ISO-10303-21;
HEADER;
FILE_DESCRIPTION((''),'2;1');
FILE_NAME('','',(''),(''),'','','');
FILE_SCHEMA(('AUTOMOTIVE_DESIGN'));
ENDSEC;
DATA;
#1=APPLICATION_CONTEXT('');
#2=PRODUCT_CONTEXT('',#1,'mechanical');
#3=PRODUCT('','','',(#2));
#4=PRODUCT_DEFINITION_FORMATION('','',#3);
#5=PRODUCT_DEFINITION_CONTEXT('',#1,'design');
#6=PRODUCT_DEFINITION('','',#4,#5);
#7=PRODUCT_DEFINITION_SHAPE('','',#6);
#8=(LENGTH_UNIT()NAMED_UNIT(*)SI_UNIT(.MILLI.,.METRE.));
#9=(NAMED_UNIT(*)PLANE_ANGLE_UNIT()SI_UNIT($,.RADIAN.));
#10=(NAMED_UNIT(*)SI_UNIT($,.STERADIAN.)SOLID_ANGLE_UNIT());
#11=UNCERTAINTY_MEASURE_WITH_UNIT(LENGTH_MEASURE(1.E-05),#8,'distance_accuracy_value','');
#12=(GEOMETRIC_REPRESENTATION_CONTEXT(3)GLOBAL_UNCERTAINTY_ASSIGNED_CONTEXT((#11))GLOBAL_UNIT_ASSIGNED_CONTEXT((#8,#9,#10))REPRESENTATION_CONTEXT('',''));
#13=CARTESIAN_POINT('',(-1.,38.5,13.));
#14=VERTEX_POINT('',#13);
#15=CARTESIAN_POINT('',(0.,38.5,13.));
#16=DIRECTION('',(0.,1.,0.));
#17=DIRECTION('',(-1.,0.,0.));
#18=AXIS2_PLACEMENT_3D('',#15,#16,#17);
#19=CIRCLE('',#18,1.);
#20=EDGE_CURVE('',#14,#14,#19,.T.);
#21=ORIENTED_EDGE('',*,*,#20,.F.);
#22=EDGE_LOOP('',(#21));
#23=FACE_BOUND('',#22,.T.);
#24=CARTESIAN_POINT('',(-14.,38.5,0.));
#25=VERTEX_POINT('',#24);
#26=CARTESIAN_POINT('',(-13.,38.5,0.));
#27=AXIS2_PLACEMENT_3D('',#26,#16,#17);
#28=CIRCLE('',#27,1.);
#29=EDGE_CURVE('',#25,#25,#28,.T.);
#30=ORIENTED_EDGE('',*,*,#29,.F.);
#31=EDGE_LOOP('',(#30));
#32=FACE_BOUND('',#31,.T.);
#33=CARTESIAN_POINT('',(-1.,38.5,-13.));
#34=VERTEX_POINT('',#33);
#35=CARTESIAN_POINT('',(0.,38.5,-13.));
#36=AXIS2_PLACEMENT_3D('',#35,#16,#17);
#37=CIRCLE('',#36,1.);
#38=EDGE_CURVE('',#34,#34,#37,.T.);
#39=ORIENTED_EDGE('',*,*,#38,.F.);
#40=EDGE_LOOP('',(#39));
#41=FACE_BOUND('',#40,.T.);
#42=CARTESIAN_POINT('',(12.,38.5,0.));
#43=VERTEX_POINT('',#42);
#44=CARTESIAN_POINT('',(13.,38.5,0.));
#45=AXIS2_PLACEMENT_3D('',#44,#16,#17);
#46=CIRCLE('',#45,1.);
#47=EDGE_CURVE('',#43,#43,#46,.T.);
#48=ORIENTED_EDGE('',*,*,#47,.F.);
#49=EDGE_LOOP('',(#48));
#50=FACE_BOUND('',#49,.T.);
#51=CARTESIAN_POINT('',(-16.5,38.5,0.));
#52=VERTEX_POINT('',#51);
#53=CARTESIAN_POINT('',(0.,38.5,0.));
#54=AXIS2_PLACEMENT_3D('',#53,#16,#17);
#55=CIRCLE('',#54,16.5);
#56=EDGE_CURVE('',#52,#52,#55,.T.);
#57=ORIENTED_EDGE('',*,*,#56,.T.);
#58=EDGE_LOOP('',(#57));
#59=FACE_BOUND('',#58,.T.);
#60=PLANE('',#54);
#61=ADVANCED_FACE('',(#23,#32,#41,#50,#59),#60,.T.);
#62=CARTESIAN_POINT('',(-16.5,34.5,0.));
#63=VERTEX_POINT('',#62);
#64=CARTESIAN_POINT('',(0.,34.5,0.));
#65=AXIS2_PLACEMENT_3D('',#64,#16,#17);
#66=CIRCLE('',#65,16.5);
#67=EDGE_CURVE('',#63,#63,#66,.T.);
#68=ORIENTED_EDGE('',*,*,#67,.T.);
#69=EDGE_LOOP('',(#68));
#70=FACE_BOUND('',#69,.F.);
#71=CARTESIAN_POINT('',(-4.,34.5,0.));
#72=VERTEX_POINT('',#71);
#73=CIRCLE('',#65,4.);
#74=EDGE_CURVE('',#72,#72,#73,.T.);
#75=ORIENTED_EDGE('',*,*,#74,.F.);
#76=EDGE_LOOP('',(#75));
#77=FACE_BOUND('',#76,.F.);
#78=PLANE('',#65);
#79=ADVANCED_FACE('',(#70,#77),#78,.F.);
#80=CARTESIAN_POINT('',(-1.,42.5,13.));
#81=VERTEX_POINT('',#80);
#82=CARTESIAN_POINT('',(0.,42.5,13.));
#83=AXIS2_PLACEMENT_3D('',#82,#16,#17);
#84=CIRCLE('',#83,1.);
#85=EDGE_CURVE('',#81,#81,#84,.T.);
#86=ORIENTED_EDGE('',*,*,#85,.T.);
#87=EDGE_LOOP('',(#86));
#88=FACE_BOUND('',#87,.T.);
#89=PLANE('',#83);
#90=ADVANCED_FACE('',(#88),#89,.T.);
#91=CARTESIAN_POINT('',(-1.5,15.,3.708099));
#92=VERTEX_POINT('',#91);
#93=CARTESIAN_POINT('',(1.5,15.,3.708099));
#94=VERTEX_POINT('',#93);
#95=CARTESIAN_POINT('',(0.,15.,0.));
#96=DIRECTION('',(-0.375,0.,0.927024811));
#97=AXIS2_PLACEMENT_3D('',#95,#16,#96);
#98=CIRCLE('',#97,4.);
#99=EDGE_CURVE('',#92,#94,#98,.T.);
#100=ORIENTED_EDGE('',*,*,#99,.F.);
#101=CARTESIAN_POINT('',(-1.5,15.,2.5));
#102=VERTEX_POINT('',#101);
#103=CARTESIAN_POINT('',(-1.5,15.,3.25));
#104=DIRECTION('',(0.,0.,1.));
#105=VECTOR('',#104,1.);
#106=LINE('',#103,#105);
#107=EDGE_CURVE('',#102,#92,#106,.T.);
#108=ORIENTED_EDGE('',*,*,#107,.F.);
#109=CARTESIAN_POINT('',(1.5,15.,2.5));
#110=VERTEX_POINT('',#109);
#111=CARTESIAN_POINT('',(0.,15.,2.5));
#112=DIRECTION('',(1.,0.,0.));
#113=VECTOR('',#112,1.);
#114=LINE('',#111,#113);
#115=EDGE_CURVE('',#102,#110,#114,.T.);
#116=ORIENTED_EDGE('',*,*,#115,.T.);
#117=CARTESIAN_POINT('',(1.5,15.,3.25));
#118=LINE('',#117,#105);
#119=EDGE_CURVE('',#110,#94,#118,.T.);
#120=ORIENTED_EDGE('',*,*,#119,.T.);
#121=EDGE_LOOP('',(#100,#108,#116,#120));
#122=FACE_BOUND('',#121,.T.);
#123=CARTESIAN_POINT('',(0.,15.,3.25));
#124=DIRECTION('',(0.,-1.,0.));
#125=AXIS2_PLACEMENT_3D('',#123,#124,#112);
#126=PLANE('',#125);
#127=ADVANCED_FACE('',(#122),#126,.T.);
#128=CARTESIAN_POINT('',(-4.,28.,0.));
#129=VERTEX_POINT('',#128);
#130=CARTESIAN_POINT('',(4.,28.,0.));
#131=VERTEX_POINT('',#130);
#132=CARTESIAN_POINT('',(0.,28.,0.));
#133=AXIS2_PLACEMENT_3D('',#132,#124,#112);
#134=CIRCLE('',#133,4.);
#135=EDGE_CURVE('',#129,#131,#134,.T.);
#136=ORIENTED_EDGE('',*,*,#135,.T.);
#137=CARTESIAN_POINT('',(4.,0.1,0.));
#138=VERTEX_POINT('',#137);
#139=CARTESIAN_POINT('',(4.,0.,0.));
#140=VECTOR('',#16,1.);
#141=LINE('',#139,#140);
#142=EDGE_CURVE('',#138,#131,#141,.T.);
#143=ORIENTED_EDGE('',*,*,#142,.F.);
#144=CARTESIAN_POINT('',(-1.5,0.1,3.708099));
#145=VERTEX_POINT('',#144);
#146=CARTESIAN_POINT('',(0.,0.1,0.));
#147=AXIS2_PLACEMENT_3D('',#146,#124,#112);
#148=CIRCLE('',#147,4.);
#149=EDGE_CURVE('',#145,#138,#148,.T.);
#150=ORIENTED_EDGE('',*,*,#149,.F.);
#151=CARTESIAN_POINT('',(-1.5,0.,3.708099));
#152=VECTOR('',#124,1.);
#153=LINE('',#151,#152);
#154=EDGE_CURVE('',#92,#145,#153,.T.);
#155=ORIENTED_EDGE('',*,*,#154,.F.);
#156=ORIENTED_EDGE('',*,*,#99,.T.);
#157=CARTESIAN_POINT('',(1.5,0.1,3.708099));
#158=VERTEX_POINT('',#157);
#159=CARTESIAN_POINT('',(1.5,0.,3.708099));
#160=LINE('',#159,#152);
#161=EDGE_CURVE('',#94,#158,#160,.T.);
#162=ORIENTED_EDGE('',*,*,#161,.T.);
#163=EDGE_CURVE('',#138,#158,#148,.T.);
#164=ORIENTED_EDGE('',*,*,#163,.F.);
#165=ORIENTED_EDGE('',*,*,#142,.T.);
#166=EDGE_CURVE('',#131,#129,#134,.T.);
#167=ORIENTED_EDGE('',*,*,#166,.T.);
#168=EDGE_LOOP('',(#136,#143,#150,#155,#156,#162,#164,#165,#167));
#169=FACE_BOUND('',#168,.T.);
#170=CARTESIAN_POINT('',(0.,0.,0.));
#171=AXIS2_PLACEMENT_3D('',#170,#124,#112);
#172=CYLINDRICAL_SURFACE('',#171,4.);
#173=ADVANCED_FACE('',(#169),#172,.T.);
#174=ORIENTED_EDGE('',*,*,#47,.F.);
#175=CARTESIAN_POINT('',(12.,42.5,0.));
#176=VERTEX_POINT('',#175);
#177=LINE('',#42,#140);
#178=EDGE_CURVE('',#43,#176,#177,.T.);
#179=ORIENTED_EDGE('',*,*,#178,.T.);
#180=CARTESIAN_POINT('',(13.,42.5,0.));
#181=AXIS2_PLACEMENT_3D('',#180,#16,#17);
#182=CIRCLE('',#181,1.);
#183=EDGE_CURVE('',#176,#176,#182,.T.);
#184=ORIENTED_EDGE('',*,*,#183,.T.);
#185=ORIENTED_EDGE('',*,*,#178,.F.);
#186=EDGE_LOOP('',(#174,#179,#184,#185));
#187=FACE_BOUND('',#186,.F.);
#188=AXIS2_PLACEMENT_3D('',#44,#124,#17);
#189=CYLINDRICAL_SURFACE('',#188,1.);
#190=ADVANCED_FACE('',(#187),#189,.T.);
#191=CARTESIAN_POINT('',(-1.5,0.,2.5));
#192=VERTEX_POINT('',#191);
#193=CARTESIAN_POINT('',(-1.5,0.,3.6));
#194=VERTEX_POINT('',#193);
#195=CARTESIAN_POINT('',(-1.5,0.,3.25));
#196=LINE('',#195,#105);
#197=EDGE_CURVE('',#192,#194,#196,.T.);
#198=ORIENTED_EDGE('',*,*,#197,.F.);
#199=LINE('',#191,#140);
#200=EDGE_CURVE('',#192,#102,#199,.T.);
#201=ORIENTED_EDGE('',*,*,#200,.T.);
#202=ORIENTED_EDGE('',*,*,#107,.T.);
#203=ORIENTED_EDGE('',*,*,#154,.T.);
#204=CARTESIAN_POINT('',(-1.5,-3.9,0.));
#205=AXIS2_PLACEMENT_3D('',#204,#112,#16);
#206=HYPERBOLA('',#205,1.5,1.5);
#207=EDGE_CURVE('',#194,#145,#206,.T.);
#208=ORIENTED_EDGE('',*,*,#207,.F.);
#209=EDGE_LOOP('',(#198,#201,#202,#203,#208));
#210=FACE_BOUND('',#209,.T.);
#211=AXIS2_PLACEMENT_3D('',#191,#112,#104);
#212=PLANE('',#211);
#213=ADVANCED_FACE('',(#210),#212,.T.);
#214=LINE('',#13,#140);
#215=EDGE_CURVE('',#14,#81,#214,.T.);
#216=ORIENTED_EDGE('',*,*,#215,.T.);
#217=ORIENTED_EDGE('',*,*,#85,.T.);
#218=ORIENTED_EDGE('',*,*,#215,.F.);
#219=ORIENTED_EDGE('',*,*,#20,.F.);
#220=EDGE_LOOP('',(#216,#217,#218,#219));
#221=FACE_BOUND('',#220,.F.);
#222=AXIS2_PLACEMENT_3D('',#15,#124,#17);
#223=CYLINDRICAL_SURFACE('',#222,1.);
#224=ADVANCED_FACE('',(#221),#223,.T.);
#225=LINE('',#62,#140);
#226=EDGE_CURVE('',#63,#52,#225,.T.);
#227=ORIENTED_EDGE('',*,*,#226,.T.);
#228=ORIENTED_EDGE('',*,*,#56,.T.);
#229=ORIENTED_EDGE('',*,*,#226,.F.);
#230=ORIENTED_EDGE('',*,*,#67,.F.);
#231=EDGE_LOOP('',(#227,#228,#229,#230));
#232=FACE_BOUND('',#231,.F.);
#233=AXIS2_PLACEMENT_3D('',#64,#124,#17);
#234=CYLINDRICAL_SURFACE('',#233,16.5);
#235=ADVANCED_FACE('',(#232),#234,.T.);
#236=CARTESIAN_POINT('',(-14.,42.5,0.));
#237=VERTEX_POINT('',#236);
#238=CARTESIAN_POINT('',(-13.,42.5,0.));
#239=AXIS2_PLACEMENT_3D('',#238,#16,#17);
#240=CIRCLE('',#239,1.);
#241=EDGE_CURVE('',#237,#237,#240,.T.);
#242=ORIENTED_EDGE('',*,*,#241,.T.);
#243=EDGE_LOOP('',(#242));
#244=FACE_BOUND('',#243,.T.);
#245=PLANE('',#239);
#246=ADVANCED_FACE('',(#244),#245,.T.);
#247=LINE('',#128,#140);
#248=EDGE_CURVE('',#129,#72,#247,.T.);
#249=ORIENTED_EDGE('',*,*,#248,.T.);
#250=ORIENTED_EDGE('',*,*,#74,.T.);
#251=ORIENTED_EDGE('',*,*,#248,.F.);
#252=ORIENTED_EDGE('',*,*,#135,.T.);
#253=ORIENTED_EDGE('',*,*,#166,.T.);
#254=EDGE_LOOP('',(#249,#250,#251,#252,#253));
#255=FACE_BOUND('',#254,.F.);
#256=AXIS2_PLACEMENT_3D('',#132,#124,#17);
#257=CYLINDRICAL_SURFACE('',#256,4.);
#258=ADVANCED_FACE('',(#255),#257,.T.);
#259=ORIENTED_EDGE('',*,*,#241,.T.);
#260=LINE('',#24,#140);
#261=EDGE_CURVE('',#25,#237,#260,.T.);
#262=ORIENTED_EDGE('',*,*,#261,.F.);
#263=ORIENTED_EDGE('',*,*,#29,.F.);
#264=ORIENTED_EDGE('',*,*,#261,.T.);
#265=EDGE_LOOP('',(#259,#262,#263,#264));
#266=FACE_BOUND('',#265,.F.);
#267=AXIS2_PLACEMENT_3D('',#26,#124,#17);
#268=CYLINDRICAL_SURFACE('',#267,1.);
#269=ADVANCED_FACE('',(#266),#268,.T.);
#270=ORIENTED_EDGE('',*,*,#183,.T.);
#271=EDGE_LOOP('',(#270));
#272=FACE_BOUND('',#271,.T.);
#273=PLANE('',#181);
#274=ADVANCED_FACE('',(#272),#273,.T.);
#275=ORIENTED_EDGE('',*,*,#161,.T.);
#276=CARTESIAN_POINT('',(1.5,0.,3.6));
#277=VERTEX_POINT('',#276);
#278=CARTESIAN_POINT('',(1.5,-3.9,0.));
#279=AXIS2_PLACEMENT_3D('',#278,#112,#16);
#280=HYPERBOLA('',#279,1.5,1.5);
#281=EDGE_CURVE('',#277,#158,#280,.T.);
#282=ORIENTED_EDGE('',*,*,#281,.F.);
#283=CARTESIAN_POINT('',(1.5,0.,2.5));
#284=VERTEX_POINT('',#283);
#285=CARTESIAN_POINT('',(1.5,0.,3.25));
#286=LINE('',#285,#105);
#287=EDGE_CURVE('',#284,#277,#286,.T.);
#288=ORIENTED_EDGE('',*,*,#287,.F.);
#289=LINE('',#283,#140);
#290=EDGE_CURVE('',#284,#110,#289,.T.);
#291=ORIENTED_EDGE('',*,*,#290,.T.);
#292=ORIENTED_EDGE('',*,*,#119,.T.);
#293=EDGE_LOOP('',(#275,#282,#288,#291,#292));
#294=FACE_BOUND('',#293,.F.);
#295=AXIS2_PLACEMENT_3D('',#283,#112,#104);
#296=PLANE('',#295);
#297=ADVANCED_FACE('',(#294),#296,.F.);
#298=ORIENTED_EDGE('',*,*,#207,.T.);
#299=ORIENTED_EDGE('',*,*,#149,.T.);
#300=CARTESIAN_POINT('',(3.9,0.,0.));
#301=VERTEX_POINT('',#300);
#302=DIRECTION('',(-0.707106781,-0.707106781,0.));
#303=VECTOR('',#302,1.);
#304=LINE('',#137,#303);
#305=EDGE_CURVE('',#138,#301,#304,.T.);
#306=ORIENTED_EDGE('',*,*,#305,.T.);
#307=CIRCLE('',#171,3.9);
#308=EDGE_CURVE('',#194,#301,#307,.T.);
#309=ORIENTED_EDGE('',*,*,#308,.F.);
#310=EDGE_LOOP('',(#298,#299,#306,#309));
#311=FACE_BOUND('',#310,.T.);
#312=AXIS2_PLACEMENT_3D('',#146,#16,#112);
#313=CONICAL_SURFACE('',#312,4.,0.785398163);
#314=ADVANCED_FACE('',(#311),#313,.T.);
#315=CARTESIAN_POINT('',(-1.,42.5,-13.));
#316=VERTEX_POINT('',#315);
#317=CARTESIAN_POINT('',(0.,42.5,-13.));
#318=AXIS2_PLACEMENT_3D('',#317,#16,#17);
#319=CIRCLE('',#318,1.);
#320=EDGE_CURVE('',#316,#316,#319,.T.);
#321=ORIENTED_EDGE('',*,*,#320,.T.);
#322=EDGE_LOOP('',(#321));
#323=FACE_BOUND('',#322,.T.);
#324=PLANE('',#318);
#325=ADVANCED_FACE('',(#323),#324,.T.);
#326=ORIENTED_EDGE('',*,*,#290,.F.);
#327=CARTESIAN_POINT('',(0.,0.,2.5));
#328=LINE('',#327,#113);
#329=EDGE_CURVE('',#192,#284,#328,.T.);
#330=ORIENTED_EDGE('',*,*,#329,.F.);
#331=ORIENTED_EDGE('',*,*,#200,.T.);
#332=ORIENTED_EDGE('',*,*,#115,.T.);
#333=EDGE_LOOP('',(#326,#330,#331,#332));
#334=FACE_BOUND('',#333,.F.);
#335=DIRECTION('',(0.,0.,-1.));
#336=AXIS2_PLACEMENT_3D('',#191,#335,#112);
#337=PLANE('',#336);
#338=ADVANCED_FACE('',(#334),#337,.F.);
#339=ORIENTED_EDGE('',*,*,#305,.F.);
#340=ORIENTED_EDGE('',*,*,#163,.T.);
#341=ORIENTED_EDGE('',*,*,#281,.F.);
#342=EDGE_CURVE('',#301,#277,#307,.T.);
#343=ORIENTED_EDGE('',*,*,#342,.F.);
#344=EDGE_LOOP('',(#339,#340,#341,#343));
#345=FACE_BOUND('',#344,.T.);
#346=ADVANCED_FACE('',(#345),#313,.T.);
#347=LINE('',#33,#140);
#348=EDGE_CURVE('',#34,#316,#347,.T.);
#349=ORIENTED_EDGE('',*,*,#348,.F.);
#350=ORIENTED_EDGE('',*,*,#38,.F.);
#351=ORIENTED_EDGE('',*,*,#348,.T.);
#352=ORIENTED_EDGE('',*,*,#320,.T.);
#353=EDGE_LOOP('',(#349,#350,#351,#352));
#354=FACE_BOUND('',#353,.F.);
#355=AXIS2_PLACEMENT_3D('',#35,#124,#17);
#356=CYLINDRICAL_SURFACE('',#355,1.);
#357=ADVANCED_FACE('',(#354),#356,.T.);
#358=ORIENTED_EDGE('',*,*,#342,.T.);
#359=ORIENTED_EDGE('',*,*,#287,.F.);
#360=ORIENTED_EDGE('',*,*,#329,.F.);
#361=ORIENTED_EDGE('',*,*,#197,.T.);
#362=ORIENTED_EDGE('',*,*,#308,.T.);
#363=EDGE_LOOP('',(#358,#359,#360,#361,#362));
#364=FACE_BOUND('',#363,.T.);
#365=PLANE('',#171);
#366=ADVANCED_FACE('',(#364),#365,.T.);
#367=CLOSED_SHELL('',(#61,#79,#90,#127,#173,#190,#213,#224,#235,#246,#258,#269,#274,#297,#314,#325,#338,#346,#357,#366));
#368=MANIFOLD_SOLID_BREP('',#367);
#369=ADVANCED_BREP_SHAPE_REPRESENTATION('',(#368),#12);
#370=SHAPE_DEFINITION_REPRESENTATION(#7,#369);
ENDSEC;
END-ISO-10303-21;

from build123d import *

# Parameters (mm, degrees)
F0_R      = 4
F1_DEPTH  = 28
F2_SIZE   = 0.1
F3_R      = 4
F4_DEPTH  = 6.5
F5_R      = 16.5
F6_DEPTH  = 4
F7_R      = 1
F8_DEPTH  = 4
F9_W      = 3
F9_H      = 1.5
F10_DEPTH = 15


with BuildPart() as f1:
    # F0 (on Front) → F1 (new body)
    with BuildSketch(Plane.XZ):
        Circle(F0_R)
    extrude(amount=-F1_DEPTH)

    # F2
    f2_edges = [f1.edges().sort_by_distance(p)[0] for p in [
        (-4, 0, 0),
    ]]
    chamfer(f2_edges, length=F2_SIZE)

    # F3 (on face) → F4 (join)
    with BuildSketch(Plane(origin=(0, 28, 0), x_dir=(-1, 0, 0), z_dir=(0, 1, 0))):
        Circle(F3_R)
    extrude(amount=F4_DEPTH)

    # F5 (on face) → F6 (join)
    with BuildSketch(Plane(origin=(0, 34.5, 0), x_dir=(-1, 0, 0), z_dir=(0, 1, 0))):
        Circle(F5_R)
    extrude(amount=F6_DEPTH)

    # F7 (on face) → F8 (join)
    with BuildSketch(Plane(origin=(0, 38.5, 0), x_dir=(-1, 0, 0), z_dir=(0, 1, 0))):
        with Locations((0, 13)):
            Circle(F7_R)
        with Locations((-13, 0)):
            Circle(F7_R)
        with Locations((0, -13)):
            Circle(F7_R)
        with Locations((13, 0)):
            Circle(F7_R)
    extrude(amount=F8_DEPTH)

    # F9 (on face) → F10 (cut)
    with BuildSketch(Plane.XZ):
        with Locations((0, 3.25)):
            Rectangle(F9_W, F9_H)
    extrude(amount=-F10_DEPTH, mode=Mode.SUBTRACT)


solid = f1.part
